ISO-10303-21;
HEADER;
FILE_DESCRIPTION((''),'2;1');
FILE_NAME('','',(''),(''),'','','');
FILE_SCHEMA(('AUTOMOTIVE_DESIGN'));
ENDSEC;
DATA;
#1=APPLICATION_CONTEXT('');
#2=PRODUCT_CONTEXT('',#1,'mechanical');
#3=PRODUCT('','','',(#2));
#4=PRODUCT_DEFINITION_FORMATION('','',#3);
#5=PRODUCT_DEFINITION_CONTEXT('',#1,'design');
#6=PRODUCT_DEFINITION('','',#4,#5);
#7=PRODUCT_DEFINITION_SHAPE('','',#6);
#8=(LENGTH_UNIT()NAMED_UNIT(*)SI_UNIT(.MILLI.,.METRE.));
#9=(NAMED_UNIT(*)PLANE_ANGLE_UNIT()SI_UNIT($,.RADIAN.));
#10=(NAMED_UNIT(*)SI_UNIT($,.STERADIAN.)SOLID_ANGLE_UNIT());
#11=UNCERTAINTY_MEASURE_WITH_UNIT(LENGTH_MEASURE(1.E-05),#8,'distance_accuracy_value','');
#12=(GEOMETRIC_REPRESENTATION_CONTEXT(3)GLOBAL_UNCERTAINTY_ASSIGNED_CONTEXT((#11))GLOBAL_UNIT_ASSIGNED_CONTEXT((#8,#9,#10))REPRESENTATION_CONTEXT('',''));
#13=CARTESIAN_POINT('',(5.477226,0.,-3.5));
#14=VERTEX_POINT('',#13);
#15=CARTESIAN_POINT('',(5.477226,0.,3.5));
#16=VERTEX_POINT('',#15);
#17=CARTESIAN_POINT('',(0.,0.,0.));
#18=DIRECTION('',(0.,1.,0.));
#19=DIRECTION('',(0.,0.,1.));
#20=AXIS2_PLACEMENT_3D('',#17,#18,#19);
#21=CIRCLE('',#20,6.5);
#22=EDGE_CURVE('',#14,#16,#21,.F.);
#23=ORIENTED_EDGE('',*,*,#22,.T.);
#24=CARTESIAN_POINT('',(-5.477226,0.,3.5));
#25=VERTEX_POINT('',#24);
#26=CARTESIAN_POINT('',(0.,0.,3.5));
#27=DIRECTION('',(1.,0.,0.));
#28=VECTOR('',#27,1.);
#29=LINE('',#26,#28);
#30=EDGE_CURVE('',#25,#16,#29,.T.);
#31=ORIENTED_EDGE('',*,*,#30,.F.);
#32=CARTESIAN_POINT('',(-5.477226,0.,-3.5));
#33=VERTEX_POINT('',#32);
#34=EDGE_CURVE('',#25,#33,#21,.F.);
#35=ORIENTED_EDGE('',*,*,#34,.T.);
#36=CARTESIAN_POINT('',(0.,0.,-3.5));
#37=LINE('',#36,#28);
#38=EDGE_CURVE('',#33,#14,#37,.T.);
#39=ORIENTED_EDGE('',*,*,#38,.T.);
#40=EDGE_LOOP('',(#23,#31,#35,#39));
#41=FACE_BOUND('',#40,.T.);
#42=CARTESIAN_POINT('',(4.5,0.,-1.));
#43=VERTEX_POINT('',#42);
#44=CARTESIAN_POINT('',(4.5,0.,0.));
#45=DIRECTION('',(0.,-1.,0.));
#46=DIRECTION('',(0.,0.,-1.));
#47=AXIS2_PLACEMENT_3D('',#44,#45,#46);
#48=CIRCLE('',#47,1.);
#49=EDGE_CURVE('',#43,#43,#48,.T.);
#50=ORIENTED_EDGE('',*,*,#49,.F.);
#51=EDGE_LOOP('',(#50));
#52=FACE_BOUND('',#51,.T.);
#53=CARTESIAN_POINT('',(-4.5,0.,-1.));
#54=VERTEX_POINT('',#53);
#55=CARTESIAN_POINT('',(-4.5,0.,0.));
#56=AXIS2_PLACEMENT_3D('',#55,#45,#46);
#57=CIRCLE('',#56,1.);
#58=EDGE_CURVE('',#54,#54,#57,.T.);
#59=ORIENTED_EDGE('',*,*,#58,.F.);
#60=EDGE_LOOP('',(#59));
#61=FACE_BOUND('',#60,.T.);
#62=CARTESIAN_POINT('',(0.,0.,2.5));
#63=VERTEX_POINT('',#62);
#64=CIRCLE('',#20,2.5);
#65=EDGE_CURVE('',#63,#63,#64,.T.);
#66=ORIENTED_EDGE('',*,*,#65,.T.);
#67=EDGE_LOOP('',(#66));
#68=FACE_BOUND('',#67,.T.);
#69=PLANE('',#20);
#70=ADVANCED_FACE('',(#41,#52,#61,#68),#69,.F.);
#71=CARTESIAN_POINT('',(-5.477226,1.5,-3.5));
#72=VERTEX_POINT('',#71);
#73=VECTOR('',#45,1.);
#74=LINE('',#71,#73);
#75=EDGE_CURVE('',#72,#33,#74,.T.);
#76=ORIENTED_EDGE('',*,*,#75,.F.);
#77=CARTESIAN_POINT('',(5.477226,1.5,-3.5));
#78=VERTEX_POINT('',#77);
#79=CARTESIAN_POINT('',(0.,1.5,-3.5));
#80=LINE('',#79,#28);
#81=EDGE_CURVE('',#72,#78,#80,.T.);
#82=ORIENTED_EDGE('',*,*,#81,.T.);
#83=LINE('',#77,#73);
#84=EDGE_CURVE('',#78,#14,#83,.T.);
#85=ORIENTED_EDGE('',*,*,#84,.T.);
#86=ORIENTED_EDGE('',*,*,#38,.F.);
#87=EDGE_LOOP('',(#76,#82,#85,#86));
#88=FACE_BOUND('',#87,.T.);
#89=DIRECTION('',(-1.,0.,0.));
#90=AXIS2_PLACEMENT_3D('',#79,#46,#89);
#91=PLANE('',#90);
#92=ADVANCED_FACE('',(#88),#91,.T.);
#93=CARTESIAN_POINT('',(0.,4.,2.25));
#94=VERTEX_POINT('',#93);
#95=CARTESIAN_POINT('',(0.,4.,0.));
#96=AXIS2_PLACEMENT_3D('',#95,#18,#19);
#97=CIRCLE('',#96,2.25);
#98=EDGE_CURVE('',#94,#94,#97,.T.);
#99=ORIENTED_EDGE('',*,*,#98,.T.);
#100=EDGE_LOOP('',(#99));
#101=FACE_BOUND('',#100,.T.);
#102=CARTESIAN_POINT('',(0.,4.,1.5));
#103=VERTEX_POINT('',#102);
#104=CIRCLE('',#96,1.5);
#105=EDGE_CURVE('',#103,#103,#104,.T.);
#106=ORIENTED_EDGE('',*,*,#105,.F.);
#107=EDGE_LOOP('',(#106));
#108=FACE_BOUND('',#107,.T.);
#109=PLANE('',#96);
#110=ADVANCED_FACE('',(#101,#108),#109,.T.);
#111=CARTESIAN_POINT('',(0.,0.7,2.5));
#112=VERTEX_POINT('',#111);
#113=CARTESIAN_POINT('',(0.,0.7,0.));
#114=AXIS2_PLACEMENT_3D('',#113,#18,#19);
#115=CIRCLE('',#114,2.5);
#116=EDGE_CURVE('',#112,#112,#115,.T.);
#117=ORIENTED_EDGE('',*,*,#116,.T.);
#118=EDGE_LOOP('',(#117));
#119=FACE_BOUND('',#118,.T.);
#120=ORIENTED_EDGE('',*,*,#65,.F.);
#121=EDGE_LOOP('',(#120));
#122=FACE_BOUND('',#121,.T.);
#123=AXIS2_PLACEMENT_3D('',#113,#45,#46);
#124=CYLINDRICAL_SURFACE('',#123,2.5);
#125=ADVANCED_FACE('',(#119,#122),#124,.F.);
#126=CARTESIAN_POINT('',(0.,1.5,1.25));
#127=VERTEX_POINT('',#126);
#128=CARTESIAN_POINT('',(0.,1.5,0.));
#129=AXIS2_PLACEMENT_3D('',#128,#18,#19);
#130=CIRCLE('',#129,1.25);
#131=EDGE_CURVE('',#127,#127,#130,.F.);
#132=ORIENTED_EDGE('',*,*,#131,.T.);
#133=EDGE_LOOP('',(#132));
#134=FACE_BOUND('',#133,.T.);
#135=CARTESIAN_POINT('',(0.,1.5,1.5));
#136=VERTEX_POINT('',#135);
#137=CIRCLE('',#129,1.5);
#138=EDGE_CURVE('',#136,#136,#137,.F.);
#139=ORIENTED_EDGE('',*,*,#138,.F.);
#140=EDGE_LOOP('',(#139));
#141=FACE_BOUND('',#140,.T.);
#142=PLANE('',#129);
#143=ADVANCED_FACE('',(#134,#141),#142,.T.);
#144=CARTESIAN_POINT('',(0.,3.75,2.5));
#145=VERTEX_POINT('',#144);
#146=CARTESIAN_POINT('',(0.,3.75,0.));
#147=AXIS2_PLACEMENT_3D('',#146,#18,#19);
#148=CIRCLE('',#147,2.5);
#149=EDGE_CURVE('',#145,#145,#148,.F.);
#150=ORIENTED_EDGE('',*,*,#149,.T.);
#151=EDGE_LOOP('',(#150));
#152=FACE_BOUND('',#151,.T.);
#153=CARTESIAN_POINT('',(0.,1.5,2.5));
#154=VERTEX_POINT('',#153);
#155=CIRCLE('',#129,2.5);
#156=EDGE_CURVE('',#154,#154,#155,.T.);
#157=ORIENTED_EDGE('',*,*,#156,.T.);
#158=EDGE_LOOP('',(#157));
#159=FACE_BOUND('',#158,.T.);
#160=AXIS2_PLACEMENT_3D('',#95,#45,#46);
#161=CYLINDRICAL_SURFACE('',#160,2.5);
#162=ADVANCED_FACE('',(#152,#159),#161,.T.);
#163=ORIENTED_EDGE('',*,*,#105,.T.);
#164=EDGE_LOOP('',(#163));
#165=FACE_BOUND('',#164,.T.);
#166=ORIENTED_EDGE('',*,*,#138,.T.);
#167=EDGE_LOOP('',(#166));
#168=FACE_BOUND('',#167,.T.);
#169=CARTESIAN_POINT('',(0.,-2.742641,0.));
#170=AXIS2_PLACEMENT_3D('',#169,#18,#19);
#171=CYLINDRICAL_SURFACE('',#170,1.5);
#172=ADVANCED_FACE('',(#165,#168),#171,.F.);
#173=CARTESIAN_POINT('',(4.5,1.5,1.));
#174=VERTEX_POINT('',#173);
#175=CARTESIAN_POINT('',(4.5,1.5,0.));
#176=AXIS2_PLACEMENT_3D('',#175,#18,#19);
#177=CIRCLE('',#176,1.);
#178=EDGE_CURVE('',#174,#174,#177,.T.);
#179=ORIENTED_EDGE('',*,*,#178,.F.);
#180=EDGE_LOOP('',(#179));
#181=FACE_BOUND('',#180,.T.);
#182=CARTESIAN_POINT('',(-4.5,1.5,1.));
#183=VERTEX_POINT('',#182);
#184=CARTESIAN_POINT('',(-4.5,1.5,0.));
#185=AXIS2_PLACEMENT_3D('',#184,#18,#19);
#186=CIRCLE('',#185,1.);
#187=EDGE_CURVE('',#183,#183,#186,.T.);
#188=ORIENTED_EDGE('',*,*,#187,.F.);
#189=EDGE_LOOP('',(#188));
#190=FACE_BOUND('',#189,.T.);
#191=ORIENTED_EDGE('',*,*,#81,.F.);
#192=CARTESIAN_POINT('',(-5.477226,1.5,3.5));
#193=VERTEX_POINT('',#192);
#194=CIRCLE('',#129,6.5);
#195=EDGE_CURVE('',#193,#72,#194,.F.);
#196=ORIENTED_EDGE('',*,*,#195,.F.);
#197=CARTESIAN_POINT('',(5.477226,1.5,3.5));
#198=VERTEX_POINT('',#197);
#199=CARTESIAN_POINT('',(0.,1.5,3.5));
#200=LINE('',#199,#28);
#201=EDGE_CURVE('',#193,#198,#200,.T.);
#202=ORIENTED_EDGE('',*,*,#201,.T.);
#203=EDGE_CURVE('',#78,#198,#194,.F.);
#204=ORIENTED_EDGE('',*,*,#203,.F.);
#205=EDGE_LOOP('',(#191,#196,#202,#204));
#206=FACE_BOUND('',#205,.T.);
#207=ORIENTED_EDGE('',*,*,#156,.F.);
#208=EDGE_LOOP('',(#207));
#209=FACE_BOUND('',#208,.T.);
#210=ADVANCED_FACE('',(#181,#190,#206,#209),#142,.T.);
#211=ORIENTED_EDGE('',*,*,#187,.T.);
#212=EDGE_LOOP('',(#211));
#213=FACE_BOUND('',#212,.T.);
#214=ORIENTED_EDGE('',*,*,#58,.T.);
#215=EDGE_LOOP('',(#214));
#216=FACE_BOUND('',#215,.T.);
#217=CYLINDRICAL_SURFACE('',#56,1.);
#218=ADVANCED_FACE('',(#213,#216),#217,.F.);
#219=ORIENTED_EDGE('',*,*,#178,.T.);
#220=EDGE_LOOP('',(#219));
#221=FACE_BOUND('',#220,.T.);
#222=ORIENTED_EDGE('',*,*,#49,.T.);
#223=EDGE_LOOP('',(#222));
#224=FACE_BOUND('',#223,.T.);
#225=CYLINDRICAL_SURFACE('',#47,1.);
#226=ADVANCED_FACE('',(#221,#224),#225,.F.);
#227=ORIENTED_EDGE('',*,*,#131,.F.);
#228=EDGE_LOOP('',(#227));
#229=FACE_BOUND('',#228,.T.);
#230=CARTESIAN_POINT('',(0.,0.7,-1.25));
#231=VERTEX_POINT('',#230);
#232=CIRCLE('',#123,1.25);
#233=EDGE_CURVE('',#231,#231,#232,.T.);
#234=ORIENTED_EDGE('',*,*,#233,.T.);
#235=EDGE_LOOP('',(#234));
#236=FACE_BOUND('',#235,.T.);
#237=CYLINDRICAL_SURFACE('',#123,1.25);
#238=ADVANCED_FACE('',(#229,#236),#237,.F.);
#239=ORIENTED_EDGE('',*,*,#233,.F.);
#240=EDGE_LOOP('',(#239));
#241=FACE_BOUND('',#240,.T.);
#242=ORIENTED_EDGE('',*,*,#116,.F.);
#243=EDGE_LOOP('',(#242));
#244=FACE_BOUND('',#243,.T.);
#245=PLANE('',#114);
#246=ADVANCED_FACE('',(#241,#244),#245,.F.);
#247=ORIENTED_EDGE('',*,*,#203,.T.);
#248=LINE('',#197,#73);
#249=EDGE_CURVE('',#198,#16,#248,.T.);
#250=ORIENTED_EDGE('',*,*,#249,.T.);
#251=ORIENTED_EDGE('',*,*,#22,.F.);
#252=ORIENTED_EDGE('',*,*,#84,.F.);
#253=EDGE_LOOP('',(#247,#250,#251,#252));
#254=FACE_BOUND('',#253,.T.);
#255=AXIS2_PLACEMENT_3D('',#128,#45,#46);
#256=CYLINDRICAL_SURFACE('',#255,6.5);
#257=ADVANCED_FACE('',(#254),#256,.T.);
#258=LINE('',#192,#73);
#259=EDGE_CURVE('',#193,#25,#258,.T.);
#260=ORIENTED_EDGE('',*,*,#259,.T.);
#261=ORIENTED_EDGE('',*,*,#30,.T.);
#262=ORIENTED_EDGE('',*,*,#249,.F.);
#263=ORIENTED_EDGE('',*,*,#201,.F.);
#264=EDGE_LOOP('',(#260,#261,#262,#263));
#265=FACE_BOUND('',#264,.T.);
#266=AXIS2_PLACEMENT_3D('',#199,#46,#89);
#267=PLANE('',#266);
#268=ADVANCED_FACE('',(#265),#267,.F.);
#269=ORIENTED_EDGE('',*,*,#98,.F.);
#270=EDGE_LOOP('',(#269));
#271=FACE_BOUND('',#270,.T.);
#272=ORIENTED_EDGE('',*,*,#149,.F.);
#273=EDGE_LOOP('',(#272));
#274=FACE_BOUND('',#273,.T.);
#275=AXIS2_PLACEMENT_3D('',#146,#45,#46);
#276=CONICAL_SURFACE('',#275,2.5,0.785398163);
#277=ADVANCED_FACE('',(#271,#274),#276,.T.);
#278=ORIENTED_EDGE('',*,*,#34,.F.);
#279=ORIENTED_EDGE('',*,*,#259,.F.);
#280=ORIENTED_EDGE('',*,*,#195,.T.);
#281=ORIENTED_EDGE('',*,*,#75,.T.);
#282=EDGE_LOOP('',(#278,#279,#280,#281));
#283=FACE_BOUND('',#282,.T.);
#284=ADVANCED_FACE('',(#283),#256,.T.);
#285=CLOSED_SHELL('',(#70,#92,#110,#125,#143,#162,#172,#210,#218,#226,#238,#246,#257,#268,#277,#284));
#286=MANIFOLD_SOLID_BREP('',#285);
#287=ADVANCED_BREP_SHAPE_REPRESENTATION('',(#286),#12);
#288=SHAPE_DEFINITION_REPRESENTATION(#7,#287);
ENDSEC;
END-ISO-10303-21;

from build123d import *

# Parameters (mm, degrees)
BASE_SKETCH_W              = 10.95445115
BASE_SKETCH_H              = 7
BASE_EXTRUDE_DEPTH         = 1.5
PROTRUSION_START           = 1.5
F_5MM_DIAMETER_SKETCH_R    = 2.5
PROTRUSION_EXTRUDE_DEPTH   = 2.5
F_5MM_DIAMETER_SKETCH_2_R  = 2.5
F_5MM_BOTTOM_CUT_DEPTH     = 0.7
F_2_0_2_DIAMETER_HOLE1_D   = 2
F_2_5_2_5_DIAMETER_HOLE1_D = 2.5
CUT_EXTRUDE2_START         = 4
F_3MM_DIAMETER_SKETCH_R    = 1.5
CUT_EXTRUDE2_DEPTH         = 2.5


with BuildPart() as part:
    # Base Sketch → Base Extrude (new body)
    with BuildSketch(Plane(origin=(0, 0, 0), x_dir=(1, 0, 0), z_dir=(0, 1, 0))):
        Rectangle(BASE_SKETCH_W, BASE_SKETCH_H)
        with BuildLine():
            ThreePointArc((-5.477225575, -3.5), (-6.5, 0), (-5.477225575, 3.5))
            Line((-5.477225575, 3.5), (-5.477225575, -3.5))
        make_face()
        with BuildLine():
            ThreePointArc((5.477225575, 3.5), (6.5, 0), (5.477225575, -3.5))
            Line((5.477225575, -3.5), (5.477225575, 3.5))
        make_face()
    extrude(amount=BASE_EXTRUDE_DEPTH)

    # 5mm diameter Sketch → Protrusion Extrude (add)
    with BuildSketch(Plane(origin=(0, 0, 0), x_dir=(1, 0, 0), z_dir=(0, 1, 0)).offset(PROTRUSION_START)):
        with Locations(Location((0, 0, 0), (0, 0, 270))):
            Circle(F_5MM_DIAMETER_SKETCH_R)
    extrude(amount=PROTRUSION_EXTRUDE_DEPTH)

    # 5mm diameter Sketch<2> → 5mm Bottom Cut (cut)
    with BuildSketch(Plane(origin=(0, 0, 0), x_dir=(1, 0, 0), z_dir=(0, 1, 0))):
        with Locations(Location((0, 0, 0), (0, 0, 270))):
            Circle(F_5MM_DIAMETER_SKETCH_2_R)
    extrude(amount=F_5MM_BOTTOM_CUT_DEPTH, mode=Mode.SUBTRACT)

    # Chamfer1: read off the stored shape, not the designer's step
    # Chamfer1 outline → Chamfer1 (revolve, cut)
    with BuildSketch(Plane.XY):
        Polygon((2.5, 4), (2.25, 4), (2.5, 3.75), align=None)
    revolve(axis=Axis((0, 0, 0), (0, 1, 0)), mode=Mode.SUBTRACT)

    # Ø2.0 (2) Diameter Hole1 (through all)
    with Locations(Plane(origin=(0, 0, 0), x_dir=(-1, 0, 0), z_dir=(0, -1, 0))):
        with Locations((4.5, 0), (-4.5, 0)):
            Hole(F_2_0_2_DIAMETER_HOLE1_D / 2)

    # Ø2.5 (2.5) Diameter Hole1 (through all)
    with Locations(Plane(origin=(0, 0.7, 0), x_dir=(-1, 0, 0), z_dir=(0, -1, 0))):
        with Locations((0, 0)):
            Hole(F_2_5_2_5_DIAMETER_HOLE1_D / 2)

    # 3mm Diameter Sketch → Cut-Extrude2 (cut)
    with BuildSketch(Plane(origin=(0, 0, 0), x_dir=(1, 0, 0), z_dir=(0, 1, 0)).offset(CUT_EXTRUDE2_START)):
        with Locations(Location((0, 0, 0), (0, 0, 270))):
            Circle(F_3MM_DIAMETER_SKETCH_R)
    extrude(amount=-CUT_EXTRUDE2_DEPTH, mode=Mode.SUBTRACT)


solid = part.part
